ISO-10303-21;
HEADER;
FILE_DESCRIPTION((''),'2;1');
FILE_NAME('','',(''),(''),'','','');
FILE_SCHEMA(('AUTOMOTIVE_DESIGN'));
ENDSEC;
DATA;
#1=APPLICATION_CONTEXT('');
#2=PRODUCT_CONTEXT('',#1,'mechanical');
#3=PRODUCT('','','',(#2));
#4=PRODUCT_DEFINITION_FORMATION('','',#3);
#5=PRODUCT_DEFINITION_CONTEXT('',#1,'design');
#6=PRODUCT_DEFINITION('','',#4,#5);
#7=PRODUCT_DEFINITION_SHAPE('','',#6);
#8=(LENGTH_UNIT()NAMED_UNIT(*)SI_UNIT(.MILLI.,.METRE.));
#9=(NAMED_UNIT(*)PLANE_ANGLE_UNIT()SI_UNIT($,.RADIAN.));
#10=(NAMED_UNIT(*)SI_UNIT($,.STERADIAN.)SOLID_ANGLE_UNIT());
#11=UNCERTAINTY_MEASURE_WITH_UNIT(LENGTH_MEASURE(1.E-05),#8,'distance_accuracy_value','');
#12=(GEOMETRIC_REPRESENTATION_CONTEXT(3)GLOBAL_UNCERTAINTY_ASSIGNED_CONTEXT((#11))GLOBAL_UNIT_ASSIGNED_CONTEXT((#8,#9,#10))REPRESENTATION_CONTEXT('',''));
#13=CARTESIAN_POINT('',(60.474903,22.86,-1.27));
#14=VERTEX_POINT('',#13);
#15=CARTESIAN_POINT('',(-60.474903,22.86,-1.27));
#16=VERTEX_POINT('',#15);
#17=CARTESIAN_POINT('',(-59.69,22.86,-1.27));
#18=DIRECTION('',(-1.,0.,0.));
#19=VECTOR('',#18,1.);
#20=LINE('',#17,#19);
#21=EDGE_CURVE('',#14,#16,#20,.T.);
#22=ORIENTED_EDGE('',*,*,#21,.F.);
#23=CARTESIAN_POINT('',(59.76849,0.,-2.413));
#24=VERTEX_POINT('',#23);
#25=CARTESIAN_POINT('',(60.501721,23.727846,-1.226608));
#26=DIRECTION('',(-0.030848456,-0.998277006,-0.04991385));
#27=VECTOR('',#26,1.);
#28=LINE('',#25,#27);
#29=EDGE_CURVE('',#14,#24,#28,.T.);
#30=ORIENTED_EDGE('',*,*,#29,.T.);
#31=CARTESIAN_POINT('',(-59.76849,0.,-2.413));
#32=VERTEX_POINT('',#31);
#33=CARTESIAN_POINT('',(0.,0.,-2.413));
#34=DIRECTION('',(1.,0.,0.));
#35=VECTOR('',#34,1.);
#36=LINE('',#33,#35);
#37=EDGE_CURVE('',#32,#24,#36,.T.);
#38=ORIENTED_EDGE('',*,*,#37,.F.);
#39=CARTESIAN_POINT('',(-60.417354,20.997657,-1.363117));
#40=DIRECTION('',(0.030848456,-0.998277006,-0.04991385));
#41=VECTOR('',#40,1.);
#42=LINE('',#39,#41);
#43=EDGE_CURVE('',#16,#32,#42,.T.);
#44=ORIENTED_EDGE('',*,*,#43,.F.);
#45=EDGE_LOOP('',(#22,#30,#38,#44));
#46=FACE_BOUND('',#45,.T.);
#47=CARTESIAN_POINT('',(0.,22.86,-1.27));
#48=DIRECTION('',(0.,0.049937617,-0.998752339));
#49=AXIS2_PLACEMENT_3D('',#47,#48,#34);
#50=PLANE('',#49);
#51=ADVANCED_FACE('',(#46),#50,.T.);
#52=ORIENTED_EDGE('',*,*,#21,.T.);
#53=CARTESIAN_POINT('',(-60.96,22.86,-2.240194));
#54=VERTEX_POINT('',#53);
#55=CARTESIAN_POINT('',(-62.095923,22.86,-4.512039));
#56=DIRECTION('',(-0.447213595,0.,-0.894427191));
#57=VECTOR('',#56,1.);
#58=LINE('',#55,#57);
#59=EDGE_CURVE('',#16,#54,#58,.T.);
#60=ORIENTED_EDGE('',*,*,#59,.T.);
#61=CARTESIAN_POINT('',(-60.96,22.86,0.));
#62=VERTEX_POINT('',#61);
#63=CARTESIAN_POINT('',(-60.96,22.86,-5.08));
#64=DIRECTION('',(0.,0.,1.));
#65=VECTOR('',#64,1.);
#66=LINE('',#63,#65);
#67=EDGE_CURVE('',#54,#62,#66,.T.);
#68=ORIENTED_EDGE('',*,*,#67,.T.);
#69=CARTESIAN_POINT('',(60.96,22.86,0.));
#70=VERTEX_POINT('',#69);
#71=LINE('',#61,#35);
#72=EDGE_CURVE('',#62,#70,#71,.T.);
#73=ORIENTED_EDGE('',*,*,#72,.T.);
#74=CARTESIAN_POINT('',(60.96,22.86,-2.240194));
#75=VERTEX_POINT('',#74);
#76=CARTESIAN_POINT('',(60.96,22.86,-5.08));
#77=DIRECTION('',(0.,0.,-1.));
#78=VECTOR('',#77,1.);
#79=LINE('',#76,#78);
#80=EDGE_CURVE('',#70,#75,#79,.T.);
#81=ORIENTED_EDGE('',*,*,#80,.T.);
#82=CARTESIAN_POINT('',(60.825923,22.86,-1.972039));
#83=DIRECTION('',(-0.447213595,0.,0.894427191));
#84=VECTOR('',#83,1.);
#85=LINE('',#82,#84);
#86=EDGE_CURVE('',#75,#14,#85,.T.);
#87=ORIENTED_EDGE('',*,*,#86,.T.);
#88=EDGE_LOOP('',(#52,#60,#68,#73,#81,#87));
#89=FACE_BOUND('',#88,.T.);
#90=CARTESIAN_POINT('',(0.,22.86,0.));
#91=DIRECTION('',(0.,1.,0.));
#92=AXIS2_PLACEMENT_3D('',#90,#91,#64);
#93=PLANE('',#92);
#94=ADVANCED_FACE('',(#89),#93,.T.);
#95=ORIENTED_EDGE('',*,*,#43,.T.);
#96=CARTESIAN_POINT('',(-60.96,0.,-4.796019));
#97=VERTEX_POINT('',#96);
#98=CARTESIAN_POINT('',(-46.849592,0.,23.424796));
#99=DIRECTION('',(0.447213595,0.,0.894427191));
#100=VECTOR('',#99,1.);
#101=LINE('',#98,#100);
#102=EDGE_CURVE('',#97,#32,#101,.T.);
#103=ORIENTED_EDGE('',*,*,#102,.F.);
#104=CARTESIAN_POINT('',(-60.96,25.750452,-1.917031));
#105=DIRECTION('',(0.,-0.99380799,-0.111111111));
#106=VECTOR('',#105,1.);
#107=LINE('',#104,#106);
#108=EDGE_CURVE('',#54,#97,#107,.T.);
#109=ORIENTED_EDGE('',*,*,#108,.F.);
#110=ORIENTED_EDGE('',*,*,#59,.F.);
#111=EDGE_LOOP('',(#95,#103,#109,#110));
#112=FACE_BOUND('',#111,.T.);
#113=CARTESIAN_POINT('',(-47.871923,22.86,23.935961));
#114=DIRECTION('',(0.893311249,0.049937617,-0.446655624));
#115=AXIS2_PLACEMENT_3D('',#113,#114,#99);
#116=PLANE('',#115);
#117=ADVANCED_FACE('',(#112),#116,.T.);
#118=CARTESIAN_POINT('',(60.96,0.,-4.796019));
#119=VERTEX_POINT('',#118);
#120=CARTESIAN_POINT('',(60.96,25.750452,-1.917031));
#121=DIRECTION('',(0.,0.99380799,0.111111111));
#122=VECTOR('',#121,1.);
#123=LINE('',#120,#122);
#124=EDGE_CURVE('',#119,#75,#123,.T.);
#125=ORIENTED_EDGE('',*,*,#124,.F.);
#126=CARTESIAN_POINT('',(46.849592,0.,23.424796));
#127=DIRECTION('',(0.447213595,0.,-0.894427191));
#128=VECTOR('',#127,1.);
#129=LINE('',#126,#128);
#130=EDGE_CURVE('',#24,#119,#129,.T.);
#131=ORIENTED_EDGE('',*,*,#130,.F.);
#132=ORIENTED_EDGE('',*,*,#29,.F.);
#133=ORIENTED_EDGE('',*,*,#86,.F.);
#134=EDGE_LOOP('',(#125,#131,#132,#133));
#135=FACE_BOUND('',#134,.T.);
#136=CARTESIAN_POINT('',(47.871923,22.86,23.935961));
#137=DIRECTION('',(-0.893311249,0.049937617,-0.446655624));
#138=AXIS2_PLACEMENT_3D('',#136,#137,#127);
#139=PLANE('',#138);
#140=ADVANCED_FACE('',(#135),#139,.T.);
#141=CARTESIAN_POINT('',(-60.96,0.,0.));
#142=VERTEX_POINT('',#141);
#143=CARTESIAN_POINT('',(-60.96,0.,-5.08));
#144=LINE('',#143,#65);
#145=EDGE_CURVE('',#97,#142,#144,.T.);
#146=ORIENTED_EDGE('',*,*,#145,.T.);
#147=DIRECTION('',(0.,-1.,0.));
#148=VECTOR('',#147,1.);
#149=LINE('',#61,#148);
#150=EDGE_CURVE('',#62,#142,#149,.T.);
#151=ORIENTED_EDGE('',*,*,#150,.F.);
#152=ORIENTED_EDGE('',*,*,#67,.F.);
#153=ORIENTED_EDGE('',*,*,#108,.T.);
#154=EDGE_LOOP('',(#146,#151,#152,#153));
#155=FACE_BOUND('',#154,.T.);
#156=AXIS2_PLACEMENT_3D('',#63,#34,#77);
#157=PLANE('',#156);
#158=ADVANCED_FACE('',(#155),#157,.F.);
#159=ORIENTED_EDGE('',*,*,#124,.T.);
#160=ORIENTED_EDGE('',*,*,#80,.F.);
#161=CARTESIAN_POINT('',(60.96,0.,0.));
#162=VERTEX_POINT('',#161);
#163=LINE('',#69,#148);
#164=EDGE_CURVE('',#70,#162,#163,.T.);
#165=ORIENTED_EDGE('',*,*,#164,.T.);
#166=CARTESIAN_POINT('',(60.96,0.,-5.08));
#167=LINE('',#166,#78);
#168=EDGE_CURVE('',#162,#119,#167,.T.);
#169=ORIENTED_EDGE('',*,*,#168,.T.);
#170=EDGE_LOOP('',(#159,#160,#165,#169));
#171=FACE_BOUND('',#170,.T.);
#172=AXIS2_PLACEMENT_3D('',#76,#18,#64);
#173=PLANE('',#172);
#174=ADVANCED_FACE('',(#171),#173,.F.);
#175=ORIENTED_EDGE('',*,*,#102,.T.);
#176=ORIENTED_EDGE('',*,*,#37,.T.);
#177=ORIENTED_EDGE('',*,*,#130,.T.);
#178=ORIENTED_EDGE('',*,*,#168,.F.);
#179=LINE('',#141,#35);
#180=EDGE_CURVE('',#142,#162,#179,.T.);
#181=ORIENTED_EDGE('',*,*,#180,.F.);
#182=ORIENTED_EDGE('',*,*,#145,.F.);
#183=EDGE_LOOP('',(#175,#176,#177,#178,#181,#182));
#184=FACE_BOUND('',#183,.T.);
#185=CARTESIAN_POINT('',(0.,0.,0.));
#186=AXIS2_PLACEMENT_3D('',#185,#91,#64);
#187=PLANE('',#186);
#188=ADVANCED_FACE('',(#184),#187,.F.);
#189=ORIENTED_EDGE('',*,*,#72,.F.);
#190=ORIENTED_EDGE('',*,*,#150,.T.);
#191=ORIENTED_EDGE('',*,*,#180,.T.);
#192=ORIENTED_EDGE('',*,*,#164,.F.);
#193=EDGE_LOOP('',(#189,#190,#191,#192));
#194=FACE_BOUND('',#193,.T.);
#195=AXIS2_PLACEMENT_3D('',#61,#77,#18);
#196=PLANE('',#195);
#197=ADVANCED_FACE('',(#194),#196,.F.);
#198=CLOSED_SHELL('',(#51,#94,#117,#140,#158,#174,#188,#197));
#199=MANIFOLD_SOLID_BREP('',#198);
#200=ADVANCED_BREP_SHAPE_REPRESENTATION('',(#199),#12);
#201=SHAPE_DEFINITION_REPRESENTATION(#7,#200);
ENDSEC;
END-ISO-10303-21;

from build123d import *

# Parameters (mm, degrees)
BOSS_EXTRUDE1_DEPTH = 22.86
CHAMFER1_SIZE       = 25.4
CHAMFER1_SIZE_2     = 1.27


with BuildPart() as part:
    # Sketch2 → Boss-Extrude1 (new body)
    with BuildSketch(Plane(origin=(0, 0, 0), x_dir=(1, 0, 0), z_dir=(0, 1, 0))):
        Polygon((-60.96, 5.08), (-59.69, 2.54), (59.69, 2.54), (60.96, 5.08), (60.96, 0), (-60.96, 0), align=None)
    extrude(amount=BOSS_EXTRUDE1_DEPTH)

    # Chamfer1
    # the kernel refuses this chamfer: 25.4, 1.27 mm, written as the material it takes off along each edge
    with BuildSketch(Plane(origin=(-90.492623078, 22.86, -64.145246157), x_dir=(0, -1, 0), z_dir=(0.44721359549995887, 0, 0.8944271909999155))) as chamfer1_piece_1_section:
        Polygon((CHAMFER1_SIZE, 0), (0, -CHAMFER1_SIZE_2), (0, 0), align=None)
    chamfer1_piece_1 = extrude(amount=134.913711846, mode=Mode.PRIVATE)
    chamfer1_piece_1 = split(chamfer1_piece_1, bisect_by=Plane(origin=(-90.492623078, 22.86, -2.54), z_dir=(0, 0, -1)), keep=Keep.TOP, mode=Mode.PRIVATE)
    add(chamfer1_piece_1, mode=Mode.SUBTRACT)
    with BuildSketch(Plane(origin=(-125.726952757, 22.86, -2.54), x_dir=(0, -1, 0), z_dir=(1, 0, 0))) as chamfer1_piece_2_section:
        Polygon((CHAMFER1_SIZE, 0), (0, -CHAMFER1_SIZE_2), (0, 0), align=None)
    chamfer1_piece_2 = extrude(amount=251.453905515, mode=Mode.PRIVATE)
    chamfer1_piece_2 = split(chamfer1_piece_2, bisect_by=Plane(origin=(-72.897390551, 22.86, -28.954781103), z_dir=(0.8944271909999155, 0, -0.44721359549995887)), keep=Keep.TOP, mode=Mode.PRIVATE)
    chamfer1_piece_2 = split(chamfer1_piece_2, bisect_by=Plane(origin=(22.606609449, 22.86, 71.626781103), z_dir=(-0.8944271909999155, 0, -0.44721359549995887)), keep=Keep.TOP, mode=Mode.PRIVATE)
    add(chamfer1_piece_2, mode=Mode.SUBTRACT)
    with BuildSketch(Plane(origin=(30.157376922, 22.86, 56.525246157), x_dir=(0, -1, 0), z_dir=(0.44721359549995887, 0, -0.8944271909999155))) as chamfer1_piece_3_section:
        Polygon((CHAMFER1_SIZE, 0), (0, -CHAMFER1_SIZE_2), (0, 0), align=None)
    chamfer1_piece_3 = extrude(amount=134.913711846, mode=Mode.PRIVATE)
    chamfer1_piece_3 = split(chamfer1_piece_3, bisect_by=Plane(origin=(30.157376922, 22.86, -2.54), z_dir=(0, 0, -1)), keep=Keep.TOP, mode=Mode.PRIVATE)
    add(chamfer1_piece_3, mode=Mode.SUBTRACT)
    with BuildSketch(Plane(origin=(-90.492623078, 22.86, -64.145246157), x_dir=(0, -1, 0), z_dir=(0.44721359549995887, 0, 0.8944271909999155))) as chamfer1_piece_4a_section:
        Polygon((CHAMFER1_SIZE, 0), (0, -CHAMFER1_SIZE_2), (0, 0), align=None)
    chamfer1_piece_4a = extrude(amount=134.913711846, mode=Mode.PRIVATE)
    chamfer1_piece_4a = split(chamfer1_piece_4a, bisect_by=Plane(origin=(-90.492623078, 22.86, -2.54), z_dir=(0, 0, 1)), keep=Keep.TOP, mode=Mode.PRIVATE)
    chamfer1_piece_4a = split(chamfer1_piece_4a, bisect_by=Plane(origin=(-90.492623078, 22.86, 0), z_dir=(0, 0, -1)), keep=Keep.TOP, mode=Mode.PRIVATE)
    chamfer1_piece_4a = split(chamfer1_piece_4a, bisect_by=Plane(origin=(-60.96, 22.86, -64.145246157), z_dir=(1, 0, 0)), keep=Keep.TOP, mode=Mode.PRIVATE)
    chamfer1_piece_4a = split(chamfer1_piece_4a, bisect_by=Plane(origin=(-90.492623078, 0, -64.145246157), z_dir=(0, 1, 0)), keep=Keep.TOP, mode=Mode.PRIVATE)
    with BuildSketch(Plane(origin=(-125.726952757, 22.86, -2.54), x_dir=(0, -1, 0), z_dir=(1, 0, 0))) as chamfer1_piece_4b_section:
        Polygon((CHAMFER1_SIZE, 0), (0, -CHAMFER1_SIZE_2), (0, 0), align=None)
    chamfer1_piece_4b = extrude(amount=251.453905515, mode=Mode.PRIVATE)
    chamfer1_piece_4b = split(chamfer1_piece_4b, bisect_by=Plane(origin=(-72.897390551, 22.86, -28.954781103), z_dir=(-0.8944271909999155, 0, 0.44721359549995887)), keep=Keep.TOP, mode=Mode.PRIVATE)
    chamfer1_piece_4b = split(chamfer1_piece_4b, bisect_by=Plane(origin=(-60.96, 22.86, -2.54), z_dir=(1, 0, 0)), keep=Keep.TOP, mode=Mode.PRIVATE)
    chamfer1_piece_4b = split(chamfer1_piece_4b, bisect_by=Plane(origin=(-125.726952757, 0, -2.54), z_dir=(0, 1, 0)), keep=Keep.TOP, mode=Mode.PRIVATE)
    chamfer1_piece_4 = chamfer1_piece_4a & chamfer1_piece_4b
    add(chamfer1_piece_4, mode=Mode.SUBTRACT)
    with BuildSketch(Plane(origin=(-125.726952757, 22.86, -2.54), x_dir=(0, -1, 0), z_dir=(1, 0, 0))) as chamfer1_piece_5a_section:
        Polygon((CHAMFER1_SIZE, 0), (0, -CHAMFER1_SIZE_2), (0, 0), align=None)
    chamfer1_piece_5a = extrude(amount=251.453905515, mode=Mode.PRIVATE)
    chamfer1_piece_5a = split(chamfer1_piece_5a, bisect_by=Plane(origin=(22.606609449, 22.86, 71.626781103), z_dir=(0.8944271909999155, 0, 0.44721359549995887)), keep=Keep.TOP, mode=Mode.PRIVATE)
    chamfer1_piece_5a = split(chamfer1_piece_5a, bisect_by=Plane(origin=(60.96, 22.86, -2.54), z_dir=(-1, 0, 0)), keep=Keep.TOP, mode=Mode.PRIVATE)
    chamfer1_piece_5a = split(chamfer1_piece_5a, bisect_by=Plane(origin=(-125.726952757, 0, -2.54), z_dir=(0, 1, 0)), keep=Keep.TOP, mode=Mode.PRIVATE)
    with BuildSketch(Plane(origin=(30.157376922, 22.86, 56.525246157), x_dir=(0, -1, 0), z_dir=(0.44721359549995887, 0, -0.8944271909999155))) as chamfer1_piece_5b_section:
        Polygon((CHAMFER1_SIZE, 0), (0, -CHAMFER1_SIZE_2), (0, 0), align=None)
    chamfer1_piece_5b = extrude(amount=134.913711846, mode=Mode.PRIVATE)
    chamfer1_piece_5b = split(chamfer1_piece_5b, bisect_by=Plane(origin=(30.157376922, 22.86, -2.54), z_dir=(0, 0, 1)), keep=Keep.TOP, mode=Mode.PRIVATE)
    chamfer1_piece_5b = split(chamfer1_piece_5b, bisect_by=Plane(origin=(60.96, 22.86, 56.525246157), z_dir=(-1, 0, 0)), keep=Keep.TOP, mode=Mode.PRIVATE)
    chamfer1_piece_5b = split(chamfer1_piece_5b, bisect_by=Plane(origin=(30.157376922, 22.86, 0), z_dir=(0, 0, -1)), keep=Keep.TOP, mode=Mode.PRIVATE)
    chamfer1_piece_5b = split(chamfer1_piece_5b, bisect_by=Plane(origin=(30.157376922, 0, 56.525246157), z_dir=(0, 1, 0)), keep=Keep.TOP, mode=Mode.PRIVATE)
    chamfer1_piece_5 = chamfer1_piece_5a & chamfer1_piece_5b
    add(chamfer1_piece_5, mode=Mode.SUBTRACT)


solid = part.part
